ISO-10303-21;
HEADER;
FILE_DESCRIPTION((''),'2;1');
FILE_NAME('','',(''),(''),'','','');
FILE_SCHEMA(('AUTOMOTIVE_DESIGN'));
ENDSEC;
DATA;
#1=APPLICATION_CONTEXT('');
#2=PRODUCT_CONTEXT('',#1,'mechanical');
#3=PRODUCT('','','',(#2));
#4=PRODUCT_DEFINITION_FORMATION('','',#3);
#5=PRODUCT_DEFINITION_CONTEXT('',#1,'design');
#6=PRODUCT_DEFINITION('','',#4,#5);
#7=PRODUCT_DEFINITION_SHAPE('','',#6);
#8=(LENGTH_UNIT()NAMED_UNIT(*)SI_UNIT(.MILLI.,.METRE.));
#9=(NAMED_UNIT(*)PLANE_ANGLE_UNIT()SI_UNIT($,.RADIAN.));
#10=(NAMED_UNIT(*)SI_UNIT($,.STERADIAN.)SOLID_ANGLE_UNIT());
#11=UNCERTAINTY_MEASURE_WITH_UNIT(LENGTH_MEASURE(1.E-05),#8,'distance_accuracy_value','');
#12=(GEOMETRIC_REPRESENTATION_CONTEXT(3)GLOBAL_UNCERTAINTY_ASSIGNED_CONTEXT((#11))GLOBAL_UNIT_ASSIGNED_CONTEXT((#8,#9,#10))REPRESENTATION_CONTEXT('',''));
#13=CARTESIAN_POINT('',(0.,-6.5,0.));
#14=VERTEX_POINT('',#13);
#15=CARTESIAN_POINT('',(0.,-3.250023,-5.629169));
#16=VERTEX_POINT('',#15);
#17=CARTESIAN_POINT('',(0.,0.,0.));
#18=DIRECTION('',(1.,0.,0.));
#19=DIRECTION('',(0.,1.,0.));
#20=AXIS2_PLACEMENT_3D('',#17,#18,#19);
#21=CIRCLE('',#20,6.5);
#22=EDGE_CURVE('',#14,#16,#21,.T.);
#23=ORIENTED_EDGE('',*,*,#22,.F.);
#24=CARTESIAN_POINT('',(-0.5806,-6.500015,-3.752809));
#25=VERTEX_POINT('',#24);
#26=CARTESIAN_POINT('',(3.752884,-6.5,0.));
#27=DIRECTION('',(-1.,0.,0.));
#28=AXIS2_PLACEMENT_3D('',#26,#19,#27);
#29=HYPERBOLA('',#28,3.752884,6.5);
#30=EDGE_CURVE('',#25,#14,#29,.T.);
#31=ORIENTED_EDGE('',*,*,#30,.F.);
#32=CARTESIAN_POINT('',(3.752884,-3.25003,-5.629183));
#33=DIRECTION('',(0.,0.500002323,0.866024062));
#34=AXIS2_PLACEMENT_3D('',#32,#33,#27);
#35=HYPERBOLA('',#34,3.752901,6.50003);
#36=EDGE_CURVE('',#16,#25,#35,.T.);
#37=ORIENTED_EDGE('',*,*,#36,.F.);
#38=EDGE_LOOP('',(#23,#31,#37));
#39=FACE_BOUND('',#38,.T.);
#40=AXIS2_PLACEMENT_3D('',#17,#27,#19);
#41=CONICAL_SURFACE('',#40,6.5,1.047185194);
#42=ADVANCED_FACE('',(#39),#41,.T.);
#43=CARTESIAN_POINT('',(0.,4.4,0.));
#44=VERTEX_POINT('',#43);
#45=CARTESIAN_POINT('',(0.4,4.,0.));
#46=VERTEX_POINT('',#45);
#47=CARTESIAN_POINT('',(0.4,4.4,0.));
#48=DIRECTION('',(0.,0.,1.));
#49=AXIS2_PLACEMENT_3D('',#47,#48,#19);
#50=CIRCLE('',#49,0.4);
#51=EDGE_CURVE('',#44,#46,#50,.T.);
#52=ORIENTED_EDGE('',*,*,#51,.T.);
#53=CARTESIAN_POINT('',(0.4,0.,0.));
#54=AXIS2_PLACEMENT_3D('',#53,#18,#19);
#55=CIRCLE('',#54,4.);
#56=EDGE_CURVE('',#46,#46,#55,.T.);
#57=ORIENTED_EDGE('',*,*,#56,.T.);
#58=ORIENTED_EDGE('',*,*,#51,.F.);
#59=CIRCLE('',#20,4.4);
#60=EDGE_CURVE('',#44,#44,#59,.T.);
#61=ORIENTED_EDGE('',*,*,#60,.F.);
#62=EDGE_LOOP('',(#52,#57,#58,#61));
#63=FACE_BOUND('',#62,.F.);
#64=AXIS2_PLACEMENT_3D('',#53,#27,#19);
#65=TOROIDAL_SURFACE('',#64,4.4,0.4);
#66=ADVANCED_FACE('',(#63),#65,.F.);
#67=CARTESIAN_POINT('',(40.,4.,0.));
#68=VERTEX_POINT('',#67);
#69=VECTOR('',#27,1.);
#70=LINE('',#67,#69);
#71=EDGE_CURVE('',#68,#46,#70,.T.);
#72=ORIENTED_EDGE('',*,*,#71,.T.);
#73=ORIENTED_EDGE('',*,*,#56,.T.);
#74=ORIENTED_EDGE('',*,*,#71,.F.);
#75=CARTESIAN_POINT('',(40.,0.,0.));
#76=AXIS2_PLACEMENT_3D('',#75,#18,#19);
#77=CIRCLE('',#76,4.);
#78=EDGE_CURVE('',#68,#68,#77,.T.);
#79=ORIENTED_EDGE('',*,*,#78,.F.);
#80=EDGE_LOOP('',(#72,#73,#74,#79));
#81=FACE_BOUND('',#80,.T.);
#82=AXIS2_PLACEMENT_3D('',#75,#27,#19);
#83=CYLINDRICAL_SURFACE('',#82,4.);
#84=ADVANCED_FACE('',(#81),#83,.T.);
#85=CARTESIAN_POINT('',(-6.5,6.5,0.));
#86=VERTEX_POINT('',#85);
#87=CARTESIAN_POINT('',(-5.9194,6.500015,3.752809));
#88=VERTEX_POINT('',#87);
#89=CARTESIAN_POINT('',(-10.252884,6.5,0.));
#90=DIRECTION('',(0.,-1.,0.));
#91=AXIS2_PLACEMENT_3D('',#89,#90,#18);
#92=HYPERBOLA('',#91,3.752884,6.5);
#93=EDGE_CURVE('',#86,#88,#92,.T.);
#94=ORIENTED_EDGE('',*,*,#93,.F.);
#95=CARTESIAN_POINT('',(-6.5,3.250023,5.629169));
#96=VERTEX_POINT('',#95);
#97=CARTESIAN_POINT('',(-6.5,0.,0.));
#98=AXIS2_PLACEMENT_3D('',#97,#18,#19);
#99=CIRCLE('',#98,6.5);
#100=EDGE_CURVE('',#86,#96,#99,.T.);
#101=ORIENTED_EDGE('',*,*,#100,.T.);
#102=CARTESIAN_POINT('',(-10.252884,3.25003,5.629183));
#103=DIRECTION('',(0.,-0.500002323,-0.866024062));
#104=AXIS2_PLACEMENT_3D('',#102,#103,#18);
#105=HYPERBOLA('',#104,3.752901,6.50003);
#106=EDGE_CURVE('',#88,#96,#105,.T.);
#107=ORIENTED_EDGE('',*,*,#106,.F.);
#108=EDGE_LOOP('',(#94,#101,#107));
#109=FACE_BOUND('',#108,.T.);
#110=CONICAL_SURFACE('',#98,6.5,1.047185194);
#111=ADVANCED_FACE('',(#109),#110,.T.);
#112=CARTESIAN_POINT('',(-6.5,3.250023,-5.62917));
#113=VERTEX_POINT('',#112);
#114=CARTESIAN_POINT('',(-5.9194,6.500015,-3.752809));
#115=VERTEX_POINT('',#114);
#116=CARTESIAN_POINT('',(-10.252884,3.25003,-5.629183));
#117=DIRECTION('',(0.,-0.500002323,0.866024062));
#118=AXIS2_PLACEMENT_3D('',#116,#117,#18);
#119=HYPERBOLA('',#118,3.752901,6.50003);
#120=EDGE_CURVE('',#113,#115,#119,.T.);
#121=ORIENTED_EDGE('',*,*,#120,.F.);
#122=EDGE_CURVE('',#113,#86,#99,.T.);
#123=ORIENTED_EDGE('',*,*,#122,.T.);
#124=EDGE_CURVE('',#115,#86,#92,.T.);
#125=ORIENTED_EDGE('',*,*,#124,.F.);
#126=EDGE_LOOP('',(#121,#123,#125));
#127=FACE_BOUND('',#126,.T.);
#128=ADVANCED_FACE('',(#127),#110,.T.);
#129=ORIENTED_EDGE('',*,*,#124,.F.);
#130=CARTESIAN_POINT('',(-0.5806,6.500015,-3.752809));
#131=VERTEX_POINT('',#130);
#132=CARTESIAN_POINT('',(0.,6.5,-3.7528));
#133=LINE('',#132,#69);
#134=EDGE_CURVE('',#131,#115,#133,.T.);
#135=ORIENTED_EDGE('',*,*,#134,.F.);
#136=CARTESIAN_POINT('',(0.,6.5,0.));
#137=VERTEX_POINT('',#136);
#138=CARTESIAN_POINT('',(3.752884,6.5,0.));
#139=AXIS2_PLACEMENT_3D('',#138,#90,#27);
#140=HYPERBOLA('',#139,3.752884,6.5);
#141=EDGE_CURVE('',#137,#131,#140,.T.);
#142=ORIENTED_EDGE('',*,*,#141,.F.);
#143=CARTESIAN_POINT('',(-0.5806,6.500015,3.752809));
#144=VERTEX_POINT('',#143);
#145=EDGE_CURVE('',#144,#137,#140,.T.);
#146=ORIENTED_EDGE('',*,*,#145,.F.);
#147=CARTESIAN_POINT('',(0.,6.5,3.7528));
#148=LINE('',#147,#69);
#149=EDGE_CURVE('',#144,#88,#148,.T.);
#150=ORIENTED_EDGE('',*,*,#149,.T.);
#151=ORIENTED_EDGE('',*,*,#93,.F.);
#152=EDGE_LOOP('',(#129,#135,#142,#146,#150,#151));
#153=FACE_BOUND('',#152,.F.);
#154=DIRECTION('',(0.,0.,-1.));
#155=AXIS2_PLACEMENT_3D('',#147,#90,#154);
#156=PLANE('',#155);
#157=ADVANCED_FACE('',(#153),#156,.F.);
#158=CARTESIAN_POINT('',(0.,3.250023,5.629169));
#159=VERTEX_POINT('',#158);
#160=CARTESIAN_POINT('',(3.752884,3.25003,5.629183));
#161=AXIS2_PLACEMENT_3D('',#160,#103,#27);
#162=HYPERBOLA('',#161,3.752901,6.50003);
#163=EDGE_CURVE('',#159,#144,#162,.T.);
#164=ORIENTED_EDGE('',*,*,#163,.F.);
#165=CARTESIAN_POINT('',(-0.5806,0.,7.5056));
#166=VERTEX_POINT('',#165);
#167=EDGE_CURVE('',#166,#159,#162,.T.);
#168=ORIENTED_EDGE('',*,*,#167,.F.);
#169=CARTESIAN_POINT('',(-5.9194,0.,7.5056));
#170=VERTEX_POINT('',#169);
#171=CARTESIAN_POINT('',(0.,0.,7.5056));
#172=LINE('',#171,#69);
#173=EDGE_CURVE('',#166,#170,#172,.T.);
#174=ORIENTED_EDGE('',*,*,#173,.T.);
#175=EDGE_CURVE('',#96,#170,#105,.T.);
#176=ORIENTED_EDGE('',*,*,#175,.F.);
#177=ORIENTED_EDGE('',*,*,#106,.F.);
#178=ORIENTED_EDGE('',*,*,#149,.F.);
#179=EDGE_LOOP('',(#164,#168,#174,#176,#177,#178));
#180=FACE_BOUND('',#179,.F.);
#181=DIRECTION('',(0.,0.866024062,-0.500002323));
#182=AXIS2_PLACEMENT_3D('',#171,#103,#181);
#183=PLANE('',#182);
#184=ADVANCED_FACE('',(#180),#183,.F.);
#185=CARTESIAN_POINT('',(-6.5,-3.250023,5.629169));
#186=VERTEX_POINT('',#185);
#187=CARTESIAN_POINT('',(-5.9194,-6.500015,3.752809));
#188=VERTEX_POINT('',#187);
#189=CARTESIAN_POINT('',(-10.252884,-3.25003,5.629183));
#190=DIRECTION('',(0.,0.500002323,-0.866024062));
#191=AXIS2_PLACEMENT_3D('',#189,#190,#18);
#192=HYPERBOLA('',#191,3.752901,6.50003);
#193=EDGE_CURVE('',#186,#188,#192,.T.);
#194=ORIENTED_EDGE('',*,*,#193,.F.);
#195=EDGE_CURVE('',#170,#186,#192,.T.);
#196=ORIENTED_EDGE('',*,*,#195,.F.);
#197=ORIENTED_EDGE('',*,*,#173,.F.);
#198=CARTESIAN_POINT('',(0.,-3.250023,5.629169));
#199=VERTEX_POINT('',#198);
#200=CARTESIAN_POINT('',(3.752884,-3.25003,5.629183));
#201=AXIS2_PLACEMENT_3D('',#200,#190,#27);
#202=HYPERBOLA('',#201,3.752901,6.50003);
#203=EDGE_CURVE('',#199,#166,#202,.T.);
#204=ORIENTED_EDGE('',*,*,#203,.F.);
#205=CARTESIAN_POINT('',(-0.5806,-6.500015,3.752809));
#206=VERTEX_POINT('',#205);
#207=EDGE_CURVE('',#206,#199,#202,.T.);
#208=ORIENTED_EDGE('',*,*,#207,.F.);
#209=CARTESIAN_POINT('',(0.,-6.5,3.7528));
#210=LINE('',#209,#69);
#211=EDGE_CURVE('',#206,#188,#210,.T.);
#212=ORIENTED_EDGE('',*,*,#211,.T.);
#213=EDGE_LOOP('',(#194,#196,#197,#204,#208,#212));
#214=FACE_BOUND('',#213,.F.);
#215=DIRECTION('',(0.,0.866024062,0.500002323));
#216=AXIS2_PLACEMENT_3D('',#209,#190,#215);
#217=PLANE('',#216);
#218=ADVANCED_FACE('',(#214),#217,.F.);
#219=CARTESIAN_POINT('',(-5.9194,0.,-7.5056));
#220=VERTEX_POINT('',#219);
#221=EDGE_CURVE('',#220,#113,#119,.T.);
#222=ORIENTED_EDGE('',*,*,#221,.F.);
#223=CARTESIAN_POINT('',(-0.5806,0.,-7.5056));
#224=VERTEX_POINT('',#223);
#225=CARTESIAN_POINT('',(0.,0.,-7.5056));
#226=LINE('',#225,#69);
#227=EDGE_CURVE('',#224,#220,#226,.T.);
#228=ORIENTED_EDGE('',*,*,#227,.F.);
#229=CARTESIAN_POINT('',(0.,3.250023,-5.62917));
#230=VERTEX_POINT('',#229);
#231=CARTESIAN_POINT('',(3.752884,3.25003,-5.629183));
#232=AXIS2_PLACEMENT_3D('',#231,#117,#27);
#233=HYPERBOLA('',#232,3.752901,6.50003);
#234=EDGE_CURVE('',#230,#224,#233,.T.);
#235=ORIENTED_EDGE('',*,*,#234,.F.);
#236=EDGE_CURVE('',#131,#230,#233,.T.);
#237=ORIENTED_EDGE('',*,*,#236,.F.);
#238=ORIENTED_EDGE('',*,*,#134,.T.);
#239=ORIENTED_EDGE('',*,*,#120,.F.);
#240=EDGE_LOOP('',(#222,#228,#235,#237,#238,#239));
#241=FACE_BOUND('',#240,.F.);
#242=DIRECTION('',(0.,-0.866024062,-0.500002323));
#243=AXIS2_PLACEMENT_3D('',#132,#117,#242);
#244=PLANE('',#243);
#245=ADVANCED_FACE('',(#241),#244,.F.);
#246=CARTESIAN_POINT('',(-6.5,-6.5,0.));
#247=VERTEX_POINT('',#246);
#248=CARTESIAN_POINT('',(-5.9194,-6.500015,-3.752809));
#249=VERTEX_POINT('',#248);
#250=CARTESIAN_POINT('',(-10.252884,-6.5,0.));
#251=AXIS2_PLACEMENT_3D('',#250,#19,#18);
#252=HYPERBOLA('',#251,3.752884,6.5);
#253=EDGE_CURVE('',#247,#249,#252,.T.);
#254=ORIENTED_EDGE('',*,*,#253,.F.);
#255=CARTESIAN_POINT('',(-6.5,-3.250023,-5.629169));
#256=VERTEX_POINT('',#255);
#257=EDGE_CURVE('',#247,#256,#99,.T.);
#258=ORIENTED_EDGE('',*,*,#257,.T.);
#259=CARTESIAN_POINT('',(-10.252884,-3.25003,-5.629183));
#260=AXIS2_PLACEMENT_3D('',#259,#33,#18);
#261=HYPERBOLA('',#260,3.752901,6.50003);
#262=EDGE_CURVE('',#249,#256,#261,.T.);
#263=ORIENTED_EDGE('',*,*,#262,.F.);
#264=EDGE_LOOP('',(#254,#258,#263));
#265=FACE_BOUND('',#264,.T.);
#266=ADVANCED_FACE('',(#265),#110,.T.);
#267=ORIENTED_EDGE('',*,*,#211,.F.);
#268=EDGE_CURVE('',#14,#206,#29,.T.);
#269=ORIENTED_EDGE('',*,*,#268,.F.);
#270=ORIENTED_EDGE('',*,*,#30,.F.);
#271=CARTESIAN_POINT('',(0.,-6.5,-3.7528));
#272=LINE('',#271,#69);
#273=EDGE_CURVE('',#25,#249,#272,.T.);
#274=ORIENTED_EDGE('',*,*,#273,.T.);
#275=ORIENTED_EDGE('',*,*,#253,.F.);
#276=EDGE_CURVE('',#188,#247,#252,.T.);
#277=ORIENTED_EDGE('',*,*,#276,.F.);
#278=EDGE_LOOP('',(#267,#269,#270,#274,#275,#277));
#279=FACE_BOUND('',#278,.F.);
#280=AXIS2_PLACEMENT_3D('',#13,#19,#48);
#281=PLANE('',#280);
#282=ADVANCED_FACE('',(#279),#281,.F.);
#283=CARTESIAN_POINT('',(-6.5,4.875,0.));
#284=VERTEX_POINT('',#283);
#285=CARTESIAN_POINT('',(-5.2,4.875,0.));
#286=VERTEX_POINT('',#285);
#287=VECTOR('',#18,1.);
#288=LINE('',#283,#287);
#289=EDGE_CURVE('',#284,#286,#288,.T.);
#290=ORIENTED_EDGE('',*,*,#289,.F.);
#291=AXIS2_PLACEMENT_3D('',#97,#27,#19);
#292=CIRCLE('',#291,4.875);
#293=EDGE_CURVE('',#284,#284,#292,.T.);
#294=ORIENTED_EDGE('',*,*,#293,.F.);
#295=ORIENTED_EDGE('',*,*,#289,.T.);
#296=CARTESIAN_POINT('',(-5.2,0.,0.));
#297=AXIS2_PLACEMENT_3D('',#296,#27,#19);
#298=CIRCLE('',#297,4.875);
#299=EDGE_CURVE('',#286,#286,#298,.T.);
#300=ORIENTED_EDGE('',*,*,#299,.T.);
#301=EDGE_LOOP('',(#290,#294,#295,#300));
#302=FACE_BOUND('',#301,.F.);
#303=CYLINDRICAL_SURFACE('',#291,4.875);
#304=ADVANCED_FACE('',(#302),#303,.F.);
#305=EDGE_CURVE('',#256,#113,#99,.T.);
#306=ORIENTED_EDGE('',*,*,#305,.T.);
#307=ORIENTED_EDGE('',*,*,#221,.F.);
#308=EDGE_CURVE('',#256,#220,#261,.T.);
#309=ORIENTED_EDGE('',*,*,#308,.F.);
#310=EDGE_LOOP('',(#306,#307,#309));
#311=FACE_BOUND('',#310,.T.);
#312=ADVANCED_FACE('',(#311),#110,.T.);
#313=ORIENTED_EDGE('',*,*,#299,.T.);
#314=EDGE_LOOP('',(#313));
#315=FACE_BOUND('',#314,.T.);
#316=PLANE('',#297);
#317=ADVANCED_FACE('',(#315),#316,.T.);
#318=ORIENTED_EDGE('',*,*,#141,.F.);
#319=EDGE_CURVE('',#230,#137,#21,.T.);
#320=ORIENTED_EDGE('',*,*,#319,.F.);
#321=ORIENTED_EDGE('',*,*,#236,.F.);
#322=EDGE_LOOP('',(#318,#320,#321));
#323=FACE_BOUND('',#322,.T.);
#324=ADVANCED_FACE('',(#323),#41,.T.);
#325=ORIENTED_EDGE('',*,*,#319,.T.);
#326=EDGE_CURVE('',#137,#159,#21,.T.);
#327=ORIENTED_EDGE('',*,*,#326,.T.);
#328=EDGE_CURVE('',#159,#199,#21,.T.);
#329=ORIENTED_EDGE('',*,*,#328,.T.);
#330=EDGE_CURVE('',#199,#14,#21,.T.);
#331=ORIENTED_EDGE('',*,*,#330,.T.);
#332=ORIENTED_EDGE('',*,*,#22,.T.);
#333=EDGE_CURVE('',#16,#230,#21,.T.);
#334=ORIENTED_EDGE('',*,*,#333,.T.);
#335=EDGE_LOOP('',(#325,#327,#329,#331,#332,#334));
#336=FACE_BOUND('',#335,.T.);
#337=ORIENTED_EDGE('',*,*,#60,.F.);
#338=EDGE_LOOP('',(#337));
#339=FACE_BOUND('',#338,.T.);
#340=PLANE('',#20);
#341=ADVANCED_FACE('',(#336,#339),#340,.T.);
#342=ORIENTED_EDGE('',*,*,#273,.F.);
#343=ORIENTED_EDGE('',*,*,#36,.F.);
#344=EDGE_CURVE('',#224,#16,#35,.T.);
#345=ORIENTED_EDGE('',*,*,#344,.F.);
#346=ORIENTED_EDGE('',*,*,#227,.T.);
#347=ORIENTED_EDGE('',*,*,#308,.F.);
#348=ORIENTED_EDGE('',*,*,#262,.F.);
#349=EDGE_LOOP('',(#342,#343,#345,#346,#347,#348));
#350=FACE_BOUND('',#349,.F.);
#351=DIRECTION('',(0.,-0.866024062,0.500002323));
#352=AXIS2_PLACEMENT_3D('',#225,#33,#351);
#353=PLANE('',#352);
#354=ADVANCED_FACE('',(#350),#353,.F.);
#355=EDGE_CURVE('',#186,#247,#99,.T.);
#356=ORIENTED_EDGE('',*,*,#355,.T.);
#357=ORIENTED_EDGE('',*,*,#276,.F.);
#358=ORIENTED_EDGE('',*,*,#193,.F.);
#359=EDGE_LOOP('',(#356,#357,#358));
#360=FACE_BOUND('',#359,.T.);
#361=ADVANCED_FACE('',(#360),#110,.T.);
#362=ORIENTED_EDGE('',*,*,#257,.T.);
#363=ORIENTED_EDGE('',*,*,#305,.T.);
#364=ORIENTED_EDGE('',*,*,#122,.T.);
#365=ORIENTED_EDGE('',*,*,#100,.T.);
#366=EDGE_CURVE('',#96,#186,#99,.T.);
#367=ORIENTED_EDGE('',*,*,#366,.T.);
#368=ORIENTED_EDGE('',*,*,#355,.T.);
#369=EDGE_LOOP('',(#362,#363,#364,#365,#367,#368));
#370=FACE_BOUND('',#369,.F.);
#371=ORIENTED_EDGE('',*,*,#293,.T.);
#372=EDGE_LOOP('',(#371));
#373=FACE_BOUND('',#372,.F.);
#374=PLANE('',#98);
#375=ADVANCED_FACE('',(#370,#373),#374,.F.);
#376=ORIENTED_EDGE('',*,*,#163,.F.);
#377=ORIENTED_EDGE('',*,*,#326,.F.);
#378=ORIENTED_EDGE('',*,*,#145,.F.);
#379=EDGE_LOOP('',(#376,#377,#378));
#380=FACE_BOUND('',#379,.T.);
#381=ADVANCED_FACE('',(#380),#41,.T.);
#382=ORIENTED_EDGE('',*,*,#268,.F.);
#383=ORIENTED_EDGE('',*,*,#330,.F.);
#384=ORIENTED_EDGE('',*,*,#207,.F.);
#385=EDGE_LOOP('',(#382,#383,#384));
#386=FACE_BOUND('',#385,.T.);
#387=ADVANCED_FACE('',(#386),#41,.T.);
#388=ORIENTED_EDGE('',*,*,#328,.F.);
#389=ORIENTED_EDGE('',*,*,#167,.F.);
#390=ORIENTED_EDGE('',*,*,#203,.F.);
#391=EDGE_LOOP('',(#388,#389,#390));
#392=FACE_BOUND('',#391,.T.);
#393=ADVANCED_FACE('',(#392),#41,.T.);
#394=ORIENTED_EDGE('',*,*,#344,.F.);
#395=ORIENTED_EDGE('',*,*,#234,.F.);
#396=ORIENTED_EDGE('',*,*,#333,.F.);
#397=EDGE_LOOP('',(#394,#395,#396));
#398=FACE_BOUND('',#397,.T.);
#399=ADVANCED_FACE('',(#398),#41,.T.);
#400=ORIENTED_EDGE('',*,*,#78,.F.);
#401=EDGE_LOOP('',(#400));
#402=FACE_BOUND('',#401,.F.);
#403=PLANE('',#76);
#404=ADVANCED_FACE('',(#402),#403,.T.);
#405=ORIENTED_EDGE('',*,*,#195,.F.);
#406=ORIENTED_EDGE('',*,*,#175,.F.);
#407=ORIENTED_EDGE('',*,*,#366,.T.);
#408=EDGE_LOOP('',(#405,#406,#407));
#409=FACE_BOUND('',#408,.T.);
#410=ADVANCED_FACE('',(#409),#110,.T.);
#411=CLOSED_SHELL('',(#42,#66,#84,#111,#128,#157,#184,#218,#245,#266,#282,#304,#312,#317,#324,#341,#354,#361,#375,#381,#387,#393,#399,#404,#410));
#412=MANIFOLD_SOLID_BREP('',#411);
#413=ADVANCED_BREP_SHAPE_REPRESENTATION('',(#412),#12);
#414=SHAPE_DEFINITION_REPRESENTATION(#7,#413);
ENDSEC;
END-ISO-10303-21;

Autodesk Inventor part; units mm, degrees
ref_plane "YZ Plane" through (0, 0, 0) normal (1, 0, 0) x (0, 1, 0)
ref_plane "XZ Plane" through (0, 0, 0) normal (0, 1, 0) x (-1, 0, 0)
sketch "Sketch1" plane through (0, 0, 0) normal (0, 0, 1) x (1, 0, 0)
  line L0 (0, 4) -> (0, 0)
  line L1 (0, 0) -> (40, 0)
  line L2 (40, 0) -> (40, 4)
  line L3 (40, 4) -> (0, 4)
  line L4 (-8, 0) -> (48, 0) projected
  line L5 (0, -0.8) -> (0, 4.8) projected
  dimension "d0" = 8
  dimension "d1" = 40
revolve "Body" add sketch "Sketch1" angle 360 about axis through (0, 0, 0) along (1, 0, 0)
sketch "Sketch2" plane through (0, 0, 0) normal (1, 0, 0) x (0, 1, 0)
  line L0 (0, 7.5056) -> (6.5, 3.7528)
  line L1 (6.5, 3.7528) -> (6.5, -3.7528)
  line L2 (6.5, -3.7528) -> (0, -7.5056)
  line L3 (0, -7.5056) -> (-6.5, -3.7528)
  line L4 (-6.5, -3.7528) -> (-6.5, 3.7528)
  line L5 (-6.5, 3.7528) -> (0, 7.5056)
  line L6 (-9.1, 0) -> (9.1, 0) projected
  line L7 (0, -10.5078) -> (0, 10.5078) projected
  point P0 (0, 0)
  point P1 (0, 0)
  dimension "d2" = 13
extrude "Head" add sketch "Sketch2" against normal blind 6.5
sketch "Sketch3" plane through (-6.5, 0, 0) normal (-1, 0, 0) x (0, 1, 0)
  circle A0 centre (0, 0) radius 4.875
  point P0 (0, 0)
  dimension "d12" = 9.75
extrude "Indent1" cut sketch "Sketch3" against normal blind 1.3
sketch "Sketch4" plane through (0, 0, 0) normal (0, 0, 1) x (1, 0, 0)
  line L0 (-6.5, 7.5056) -> (-6.5, 6.5)
  line L1 (-6.5, 6.5) -> (-5.9194, 7.5056)
  line L2 (-5.9194, 7.5056) -> (-6.5, 7.5056)
  line L3 (0, 7.5056) -> (0, 6.5)
  line L4 (0, 6.5) -> (-0.5806, 7.5056)
  line L5 (-0.5806, 7.5056) -> (0, 7.5056)
  line L6 (0, 0) -> (-6.5, 0) projected
  line L7 (-6.5, 0) -> (-6.5, 6.5) projected
  line L8 (0, 0) -> (0, 6.5) projected
  line L9 (-7.8, 0) -> (1.3, 0) projected
  line L10 (-5.9194, 7.5056) -> (-0.5806, 7.5056) construction
  line L11 (0, -1.5011) -> (0, 9.0067) projected
  dimension "d6" = 30
  dimension "d7" = 30
  dimension "d16" = 13
  dimension "d17" = 13
  dimension "d18" = 15.0111
revolve "Chamfer1" cut sketch "Sketch4" angle 360 about axis through (-10, 0, 0) along (1, 0, 0)
fillet "Fillet1" radius 0.4 1 edges at (0, -4, 0)
thread "Thread" size "M8x1.25" class "6g" standard "ISO Metric profile" length 37.5
ref_plane "Work Plane1" through (3, 0, 0) normal (0, 0.5, 0.8660254) x (1, 0, 0)
equation "\"d2\" = SW"
equation "\"d3\" = KOH"
equation "\"d12\" = 0.75 * SW0"
equation "\"d14\" = 0.2 * KOH"
equation "\"d11\" = RR"
equation "\"d8\" = GEL"
equation "\"d0\" = GD"
equation "\"d1\" = NLG"
equation "\"d6\" = ANG1"
equation "\"d7\" = ANG1"
equation "\"d16\" = SW0"
equation "\"d17\" = SW0"
equation "\"d18\" = 1.1547 * SW"
equation "\"NLG\" = 40"
equation "\"KOH\" = 6.5"
equation "\"GD\" = NND"
equation "\"GEL\" = 37.5"
equation "\"SW\" = 13"
equation "\"SW0\" = SW"
equation "\"ANG1\" = 30deg"
equation "\"RR\" = 0.4"
equation "\"GUL\" = 0.61345 * PTC"
equation "\"SPD\" = NND - 1.2269 * PTC"
equation "\"GD1\" = THREADDIA - 1.2269 * PTC"
equation "\"THREADDIA\" = 8"
equation "\"SDH\" = 9.2"
equation "\"TOA\" = 30deg"
equation "\"BDM\" = NND"
equation "\"FAWI\" = 45deg"
equation "\"PTC\" = 1.25"
equation "\"NND\" = 8"
equation "\"GAL\" = 0.61345 * PTC"
equation "\"SD\" = 0"
equation "\"SD2\" = SDH"
equation "\"E0\" = 1.155 * SW"
properties part number "AS 1427 - M8 x 40" material "Steel, Mild"
